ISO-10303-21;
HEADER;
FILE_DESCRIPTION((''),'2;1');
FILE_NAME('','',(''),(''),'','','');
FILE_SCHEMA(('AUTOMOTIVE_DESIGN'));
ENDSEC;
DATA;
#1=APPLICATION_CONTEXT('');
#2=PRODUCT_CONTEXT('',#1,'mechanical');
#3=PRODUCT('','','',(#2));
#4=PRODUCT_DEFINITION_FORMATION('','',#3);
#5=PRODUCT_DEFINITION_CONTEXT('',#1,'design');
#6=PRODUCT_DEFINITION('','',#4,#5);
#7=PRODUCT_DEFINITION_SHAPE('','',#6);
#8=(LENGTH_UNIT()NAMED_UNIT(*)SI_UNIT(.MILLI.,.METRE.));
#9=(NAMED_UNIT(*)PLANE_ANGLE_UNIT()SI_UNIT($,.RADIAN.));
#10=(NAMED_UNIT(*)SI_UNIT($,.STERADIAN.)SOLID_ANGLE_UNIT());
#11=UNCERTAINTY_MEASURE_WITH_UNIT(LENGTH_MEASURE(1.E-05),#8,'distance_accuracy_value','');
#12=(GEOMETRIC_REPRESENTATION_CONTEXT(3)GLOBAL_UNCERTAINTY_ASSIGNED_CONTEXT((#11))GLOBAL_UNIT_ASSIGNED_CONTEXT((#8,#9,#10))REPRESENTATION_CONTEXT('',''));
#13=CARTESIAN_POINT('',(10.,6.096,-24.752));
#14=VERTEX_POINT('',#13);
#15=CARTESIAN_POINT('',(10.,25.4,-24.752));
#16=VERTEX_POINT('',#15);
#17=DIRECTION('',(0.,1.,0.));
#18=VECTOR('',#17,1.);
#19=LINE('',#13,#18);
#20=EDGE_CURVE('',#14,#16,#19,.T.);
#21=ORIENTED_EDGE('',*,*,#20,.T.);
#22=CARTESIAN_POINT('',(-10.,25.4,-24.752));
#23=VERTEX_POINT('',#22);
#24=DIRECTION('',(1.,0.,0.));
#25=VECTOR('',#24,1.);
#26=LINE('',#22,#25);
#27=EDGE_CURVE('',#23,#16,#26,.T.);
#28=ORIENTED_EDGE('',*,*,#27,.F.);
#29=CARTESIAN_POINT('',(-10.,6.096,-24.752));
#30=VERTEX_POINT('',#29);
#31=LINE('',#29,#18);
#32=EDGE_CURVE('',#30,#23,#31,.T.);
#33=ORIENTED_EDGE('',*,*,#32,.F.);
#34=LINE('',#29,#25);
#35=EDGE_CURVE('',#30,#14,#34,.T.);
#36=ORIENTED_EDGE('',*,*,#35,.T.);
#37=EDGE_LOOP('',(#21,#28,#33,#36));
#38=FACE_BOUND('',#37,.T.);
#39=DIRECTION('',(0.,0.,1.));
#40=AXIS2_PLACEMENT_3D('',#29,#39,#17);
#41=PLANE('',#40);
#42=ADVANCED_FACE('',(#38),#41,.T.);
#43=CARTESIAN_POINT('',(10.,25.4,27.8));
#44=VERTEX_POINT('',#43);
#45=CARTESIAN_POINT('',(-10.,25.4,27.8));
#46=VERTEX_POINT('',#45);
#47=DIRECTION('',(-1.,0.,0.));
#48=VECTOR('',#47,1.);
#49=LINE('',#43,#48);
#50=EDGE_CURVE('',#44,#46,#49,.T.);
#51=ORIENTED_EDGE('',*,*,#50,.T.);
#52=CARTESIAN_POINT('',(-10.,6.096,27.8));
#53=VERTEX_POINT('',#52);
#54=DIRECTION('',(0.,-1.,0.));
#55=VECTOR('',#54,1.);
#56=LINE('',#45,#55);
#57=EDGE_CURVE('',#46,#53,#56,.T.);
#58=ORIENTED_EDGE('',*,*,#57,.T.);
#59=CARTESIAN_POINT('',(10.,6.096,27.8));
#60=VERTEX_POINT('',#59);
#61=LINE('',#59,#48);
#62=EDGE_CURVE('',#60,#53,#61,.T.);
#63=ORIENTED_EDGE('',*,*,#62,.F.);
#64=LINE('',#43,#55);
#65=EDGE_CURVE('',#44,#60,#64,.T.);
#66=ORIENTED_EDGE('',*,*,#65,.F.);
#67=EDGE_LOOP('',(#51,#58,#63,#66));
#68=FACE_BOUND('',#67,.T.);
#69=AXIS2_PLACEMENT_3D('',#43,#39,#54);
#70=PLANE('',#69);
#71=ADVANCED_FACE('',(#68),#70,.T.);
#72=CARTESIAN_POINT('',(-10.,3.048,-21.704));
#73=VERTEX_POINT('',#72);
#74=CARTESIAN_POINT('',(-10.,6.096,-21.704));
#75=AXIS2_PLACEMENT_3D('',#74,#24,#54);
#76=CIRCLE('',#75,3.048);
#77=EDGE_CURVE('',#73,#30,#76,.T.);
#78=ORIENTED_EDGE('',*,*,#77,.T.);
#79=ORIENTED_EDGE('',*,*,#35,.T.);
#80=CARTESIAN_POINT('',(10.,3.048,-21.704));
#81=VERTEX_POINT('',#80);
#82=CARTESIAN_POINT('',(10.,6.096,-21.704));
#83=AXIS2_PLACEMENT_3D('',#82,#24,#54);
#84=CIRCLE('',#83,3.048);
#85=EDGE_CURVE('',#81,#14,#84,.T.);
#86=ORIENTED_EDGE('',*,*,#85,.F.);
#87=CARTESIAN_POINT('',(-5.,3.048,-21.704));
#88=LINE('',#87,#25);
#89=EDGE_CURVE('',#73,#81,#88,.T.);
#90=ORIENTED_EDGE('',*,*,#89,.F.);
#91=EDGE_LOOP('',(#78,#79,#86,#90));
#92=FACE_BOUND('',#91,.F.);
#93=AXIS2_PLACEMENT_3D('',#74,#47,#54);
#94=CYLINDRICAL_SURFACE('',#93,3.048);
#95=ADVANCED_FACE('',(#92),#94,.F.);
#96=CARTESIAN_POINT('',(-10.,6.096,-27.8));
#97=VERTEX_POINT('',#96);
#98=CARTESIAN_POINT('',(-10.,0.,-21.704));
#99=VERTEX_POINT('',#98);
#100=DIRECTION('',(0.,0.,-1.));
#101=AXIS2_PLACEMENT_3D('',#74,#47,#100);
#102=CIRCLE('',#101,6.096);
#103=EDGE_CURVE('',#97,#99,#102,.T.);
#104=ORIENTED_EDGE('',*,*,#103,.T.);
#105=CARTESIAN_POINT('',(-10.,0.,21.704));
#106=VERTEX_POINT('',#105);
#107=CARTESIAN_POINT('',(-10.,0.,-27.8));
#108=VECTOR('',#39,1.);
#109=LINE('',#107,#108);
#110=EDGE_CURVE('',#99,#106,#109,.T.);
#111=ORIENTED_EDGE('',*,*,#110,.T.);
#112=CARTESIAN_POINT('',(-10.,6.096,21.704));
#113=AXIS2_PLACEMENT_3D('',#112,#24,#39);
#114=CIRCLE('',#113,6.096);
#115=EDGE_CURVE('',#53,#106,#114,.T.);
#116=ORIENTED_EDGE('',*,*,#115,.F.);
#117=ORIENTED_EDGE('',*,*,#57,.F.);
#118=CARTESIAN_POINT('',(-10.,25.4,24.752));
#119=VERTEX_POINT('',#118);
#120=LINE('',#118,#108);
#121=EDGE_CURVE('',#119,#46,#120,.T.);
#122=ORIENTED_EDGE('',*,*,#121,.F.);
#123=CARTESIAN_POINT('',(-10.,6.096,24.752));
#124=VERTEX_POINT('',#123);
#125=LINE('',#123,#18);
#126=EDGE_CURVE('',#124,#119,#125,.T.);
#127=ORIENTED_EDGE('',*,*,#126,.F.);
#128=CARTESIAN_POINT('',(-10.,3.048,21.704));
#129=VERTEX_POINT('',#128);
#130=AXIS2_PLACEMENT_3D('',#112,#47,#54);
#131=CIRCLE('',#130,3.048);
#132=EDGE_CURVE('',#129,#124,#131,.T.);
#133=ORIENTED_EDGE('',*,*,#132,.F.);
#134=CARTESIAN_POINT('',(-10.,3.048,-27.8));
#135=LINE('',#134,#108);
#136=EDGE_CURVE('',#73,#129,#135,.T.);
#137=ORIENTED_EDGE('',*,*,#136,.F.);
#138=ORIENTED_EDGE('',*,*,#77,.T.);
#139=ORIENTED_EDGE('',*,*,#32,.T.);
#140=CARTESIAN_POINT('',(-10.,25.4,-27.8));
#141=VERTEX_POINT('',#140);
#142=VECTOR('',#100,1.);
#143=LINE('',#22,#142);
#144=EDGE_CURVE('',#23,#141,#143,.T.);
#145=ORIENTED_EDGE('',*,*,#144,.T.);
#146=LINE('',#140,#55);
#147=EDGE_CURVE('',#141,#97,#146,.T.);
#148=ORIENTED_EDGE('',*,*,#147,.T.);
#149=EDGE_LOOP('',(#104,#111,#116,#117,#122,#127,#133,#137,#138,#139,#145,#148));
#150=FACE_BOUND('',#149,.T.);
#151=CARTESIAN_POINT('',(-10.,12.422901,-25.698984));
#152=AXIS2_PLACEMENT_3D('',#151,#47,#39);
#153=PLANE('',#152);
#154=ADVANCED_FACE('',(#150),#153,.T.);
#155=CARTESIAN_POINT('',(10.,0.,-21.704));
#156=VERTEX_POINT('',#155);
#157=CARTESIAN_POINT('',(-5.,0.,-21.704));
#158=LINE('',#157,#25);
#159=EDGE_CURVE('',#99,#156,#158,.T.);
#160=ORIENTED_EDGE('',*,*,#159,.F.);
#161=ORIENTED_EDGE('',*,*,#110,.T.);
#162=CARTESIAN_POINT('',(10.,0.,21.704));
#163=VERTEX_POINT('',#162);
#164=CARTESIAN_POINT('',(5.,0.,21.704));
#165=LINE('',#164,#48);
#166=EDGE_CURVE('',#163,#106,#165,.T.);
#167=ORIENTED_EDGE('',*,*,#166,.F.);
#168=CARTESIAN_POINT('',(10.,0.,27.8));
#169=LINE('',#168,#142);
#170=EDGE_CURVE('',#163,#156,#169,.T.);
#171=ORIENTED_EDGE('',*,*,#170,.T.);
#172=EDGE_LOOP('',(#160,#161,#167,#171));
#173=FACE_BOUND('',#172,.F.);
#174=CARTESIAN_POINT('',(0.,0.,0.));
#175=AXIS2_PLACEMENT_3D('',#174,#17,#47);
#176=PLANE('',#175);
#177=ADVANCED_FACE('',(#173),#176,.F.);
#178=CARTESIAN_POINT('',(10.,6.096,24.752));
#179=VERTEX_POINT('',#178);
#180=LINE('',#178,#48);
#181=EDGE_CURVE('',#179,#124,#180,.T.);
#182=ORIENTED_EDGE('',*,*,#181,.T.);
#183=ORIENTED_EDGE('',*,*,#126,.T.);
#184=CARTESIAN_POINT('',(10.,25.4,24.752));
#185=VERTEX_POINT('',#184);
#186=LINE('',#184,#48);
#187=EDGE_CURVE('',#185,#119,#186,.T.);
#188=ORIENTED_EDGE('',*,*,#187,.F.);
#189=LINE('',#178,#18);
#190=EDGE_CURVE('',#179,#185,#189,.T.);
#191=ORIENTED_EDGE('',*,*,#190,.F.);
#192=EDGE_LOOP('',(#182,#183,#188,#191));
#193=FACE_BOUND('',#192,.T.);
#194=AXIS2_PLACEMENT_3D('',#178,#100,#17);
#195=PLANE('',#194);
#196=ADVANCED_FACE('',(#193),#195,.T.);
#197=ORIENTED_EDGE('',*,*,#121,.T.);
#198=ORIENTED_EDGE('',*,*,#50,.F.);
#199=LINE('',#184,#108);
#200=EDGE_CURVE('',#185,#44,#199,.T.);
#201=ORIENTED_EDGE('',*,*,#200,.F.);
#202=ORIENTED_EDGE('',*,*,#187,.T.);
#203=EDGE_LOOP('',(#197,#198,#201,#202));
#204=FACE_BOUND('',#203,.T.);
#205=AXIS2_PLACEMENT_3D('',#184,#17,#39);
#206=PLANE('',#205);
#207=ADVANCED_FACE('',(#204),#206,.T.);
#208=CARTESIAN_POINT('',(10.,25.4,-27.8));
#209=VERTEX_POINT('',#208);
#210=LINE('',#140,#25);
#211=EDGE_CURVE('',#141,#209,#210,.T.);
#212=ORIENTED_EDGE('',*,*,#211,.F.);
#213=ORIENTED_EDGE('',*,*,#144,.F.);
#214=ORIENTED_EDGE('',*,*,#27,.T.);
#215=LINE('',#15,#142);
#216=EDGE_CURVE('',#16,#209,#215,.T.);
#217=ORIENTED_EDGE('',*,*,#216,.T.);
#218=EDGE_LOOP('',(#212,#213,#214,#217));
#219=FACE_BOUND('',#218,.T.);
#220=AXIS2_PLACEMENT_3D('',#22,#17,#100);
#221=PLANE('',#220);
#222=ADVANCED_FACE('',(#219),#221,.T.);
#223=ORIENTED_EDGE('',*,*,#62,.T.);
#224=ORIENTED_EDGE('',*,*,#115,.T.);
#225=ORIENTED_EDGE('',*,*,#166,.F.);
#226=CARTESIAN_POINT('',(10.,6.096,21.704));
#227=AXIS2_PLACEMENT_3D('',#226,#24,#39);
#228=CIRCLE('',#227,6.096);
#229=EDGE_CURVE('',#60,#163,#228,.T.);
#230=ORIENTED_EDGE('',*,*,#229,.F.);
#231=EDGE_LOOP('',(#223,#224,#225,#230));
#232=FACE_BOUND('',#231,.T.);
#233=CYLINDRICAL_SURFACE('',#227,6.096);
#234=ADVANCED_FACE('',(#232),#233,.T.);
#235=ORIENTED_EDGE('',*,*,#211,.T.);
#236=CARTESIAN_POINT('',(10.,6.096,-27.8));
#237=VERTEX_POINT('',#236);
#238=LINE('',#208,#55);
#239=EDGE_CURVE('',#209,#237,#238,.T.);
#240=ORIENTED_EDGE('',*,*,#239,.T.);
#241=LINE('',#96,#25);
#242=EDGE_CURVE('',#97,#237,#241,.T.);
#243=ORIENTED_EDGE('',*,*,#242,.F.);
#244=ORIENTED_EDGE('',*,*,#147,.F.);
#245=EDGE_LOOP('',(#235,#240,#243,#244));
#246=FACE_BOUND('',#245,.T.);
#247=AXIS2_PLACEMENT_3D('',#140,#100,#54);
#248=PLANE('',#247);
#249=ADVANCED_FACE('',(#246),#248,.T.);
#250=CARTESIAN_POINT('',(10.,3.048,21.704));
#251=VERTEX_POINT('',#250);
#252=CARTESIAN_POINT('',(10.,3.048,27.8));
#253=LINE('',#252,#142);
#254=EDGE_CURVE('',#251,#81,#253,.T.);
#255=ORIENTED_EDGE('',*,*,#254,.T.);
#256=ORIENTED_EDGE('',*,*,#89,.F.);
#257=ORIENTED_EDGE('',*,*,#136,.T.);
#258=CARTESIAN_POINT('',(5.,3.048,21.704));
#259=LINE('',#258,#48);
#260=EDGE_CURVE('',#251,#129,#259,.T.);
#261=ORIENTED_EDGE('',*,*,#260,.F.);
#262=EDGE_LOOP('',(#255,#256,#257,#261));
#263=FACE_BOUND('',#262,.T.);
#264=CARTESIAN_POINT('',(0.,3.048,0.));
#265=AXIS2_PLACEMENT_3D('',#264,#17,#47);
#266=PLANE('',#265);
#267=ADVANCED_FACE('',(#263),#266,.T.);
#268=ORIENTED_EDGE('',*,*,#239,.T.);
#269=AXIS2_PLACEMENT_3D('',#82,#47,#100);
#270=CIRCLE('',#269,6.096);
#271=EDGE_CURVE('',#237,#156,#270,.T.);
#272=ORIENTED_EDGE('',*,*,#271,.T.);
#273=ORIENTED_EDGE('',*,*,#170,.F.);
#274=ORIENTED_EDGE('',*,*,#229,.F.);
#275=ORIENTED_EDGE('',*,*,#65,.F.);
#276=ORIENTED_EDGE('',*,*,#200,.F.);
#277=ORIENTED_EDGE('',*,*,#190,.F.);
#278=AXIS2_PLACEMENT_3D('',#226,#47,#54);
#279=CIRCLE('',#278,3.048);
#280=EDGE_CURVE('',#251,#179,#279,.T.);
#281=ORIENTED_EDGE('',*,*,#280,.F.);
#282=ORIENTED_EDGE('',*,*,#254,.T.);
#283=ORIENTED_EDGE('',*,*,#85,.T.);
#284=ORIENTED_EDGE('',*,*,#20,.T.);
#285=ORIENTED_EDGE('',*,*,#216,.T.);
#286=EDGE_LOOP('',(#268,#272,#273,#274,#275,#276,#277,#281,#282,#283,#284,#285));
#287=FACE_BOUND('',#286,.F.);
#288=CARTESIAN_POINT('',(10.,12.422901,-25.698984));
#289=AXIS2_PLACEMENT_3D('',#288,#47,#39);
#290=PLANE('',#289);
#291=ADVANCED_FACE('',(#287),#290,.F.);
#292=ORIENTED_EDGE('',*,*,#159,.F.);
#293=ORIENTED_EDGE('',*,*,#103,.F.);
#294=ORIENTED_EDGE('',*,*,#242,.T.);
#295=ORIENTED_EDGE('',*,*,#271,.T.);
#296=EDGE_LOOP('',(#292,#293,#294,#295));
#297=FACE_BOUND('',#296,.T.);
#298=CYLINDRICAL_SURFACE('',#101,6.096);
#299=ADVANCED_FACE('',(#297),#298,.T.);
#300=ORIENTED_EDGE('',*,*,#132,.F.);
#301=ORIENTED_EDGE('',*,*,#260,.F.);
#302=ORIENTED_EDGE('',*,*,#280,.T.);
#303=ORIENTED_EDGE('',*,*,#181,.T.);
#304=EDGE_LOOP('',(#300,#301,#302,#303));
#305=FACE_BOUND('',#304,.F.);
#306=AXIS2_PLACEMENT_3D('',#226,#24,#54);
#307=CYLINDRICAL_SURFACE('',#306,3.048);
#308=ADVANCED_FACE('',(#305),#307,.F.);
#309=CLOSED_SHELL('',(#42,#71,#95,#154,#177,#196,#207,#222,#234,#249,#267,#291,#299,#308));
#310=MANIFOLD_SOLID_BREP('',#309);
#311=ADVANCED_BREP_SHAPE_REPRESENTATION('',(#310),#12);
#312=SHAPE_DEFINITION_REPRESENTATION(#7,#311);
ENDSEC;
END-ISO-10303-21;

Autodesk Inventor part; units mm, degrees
ref_plane "YZ Plane" through (0, 0, 0) normal (1, 0, 0) x (0, 1, 0)
ref_plane "XZ Plane" through (0, 0, 0) normal (0, 1, 0) x (-1, 0, 0)
ref_plane "XY Plane" through (0, 0, 0) normal (0, 0, 1) x (1, 0, 0)
sketch "Sketch1" plane through (0, 0, 0) normal (0, 1, 0) x (-1, 0, 0)
  line L0 (10, 27.8) -> (-10, 27.8)
  line L1 (-10, 27.8) -> (-10, -27.8)
  line L2 (-10, -27.8) -> (10, -27.8)
  line L3 (10, -27.8) -> (10, 27.8)
  line L4 (10, 27.8) -> (-10, -27.8) construction
  line L5 (-10, 27.8) -> (10, -27.8) construction
  point P0 (0, 0)
  dimension "d0" = 55.6
  dimension "d1" = 20
extrude "Plate1" add sketch "Sketch1" along normal blind 3.048
sketch "Sketch2" plane through (10, 0, 27.8) normal (0, 0, -1) x (-1, 0, 0)
  line L0 (20, 3.048) -> (0, 3.048)
  line L1 (0, 3.048) -> (0, 25.4)
  line L2 (0, 25.4) -> (20, 25.4)
  line L3 (20, 25.4) -> (20, 3.048)
edge flange "Flange1" height 25.4 angle 90 thickness 3.048 bend radius 3.048 thickness toward (0, 0, -1) relief tear relief width 3.048 relief depth 1.524 edges at (0, 3.048, 27.8) wall of the first edge with corners at (-10, 3.048, 27.8) (10, 3.048, 27.8) (10, 25.4, 27.8) (-10, 25.4, 27.8)
bend "Bend1"
corner "Corner1"
sketch "Sketch3" plane through (-10, 0, -27.8) normal (0, 0, 1) x (1, 0, 0)
  line L0 (20, 3.048) -> (0, 3.048)
  line L1 (0, 3.048) -> (0, 25.4)
  line L2 (0, 25.4) -> (20, 25.4)
  line L3 (20, 25.4) -> (20, 3.048)
edge flange "Flange2" height 25.4 angle 90 thickness 3.048 bend radius 3.048 thickness toward (0, 0, 1) relief tear relief width 3.048 relief depth 1.524 edges at (0, 3.048, -27.8) wall of the first edge with corners at (10, 3.048, -27.8) (-10, 3.048, -27.8) (-10, 25.4, -27.8) (10, 25.4, -27.8)
bend "Bend2"
corner "Corner2"
equation "\"d2\" = Thickness"
equation "\"d3\" = BendReliefWidth"
equation "\"d4\" = BendReliefDepth"
equation "\"d5\" = MinimumRemnant"
equation "\"d6\" = TransitionRadius"
equation "\"d9\" = BendRadius"
equation "\"d10\" = CornerReliefSize"
equation "\"d11\" = GapSize"
equation "\"d12\" = JacobiRadiusSize"
equation "\"d13\" = BendReliefWidth"
equation "\"d14\" = BendReliefDepth"
equation "\"d15\" = MinimumRemnant"
equation "\"d16\" = TransitionRadius"
equation "\"d19\" = BendRadius"
equation "\"d20\" = CornerReliefSize"
equation "\"d21\" = GapSize"
equation "\"d22\" = JacobiRadiusSize"
equation "\"BendRadius\" = Thickness"
equation "\"BendReliefWidth\" = Thickness"
equation "\"BendReliefDepth\" = 0.5 * Thickness"
equation "\"CornerReliefSize\" = 4 * Thickness"
equation "\"MinimumRemnant\" = 2 * Thickness"
equation "\"TransitionRadius\" = BendRadius"
equation "\"JacobiRadiusSize\" = BendRadius"
equation "\"GapSize\" = Thickness"
equation "\"Thickness\" = 3.048"
properties part number "bracket1-01"
